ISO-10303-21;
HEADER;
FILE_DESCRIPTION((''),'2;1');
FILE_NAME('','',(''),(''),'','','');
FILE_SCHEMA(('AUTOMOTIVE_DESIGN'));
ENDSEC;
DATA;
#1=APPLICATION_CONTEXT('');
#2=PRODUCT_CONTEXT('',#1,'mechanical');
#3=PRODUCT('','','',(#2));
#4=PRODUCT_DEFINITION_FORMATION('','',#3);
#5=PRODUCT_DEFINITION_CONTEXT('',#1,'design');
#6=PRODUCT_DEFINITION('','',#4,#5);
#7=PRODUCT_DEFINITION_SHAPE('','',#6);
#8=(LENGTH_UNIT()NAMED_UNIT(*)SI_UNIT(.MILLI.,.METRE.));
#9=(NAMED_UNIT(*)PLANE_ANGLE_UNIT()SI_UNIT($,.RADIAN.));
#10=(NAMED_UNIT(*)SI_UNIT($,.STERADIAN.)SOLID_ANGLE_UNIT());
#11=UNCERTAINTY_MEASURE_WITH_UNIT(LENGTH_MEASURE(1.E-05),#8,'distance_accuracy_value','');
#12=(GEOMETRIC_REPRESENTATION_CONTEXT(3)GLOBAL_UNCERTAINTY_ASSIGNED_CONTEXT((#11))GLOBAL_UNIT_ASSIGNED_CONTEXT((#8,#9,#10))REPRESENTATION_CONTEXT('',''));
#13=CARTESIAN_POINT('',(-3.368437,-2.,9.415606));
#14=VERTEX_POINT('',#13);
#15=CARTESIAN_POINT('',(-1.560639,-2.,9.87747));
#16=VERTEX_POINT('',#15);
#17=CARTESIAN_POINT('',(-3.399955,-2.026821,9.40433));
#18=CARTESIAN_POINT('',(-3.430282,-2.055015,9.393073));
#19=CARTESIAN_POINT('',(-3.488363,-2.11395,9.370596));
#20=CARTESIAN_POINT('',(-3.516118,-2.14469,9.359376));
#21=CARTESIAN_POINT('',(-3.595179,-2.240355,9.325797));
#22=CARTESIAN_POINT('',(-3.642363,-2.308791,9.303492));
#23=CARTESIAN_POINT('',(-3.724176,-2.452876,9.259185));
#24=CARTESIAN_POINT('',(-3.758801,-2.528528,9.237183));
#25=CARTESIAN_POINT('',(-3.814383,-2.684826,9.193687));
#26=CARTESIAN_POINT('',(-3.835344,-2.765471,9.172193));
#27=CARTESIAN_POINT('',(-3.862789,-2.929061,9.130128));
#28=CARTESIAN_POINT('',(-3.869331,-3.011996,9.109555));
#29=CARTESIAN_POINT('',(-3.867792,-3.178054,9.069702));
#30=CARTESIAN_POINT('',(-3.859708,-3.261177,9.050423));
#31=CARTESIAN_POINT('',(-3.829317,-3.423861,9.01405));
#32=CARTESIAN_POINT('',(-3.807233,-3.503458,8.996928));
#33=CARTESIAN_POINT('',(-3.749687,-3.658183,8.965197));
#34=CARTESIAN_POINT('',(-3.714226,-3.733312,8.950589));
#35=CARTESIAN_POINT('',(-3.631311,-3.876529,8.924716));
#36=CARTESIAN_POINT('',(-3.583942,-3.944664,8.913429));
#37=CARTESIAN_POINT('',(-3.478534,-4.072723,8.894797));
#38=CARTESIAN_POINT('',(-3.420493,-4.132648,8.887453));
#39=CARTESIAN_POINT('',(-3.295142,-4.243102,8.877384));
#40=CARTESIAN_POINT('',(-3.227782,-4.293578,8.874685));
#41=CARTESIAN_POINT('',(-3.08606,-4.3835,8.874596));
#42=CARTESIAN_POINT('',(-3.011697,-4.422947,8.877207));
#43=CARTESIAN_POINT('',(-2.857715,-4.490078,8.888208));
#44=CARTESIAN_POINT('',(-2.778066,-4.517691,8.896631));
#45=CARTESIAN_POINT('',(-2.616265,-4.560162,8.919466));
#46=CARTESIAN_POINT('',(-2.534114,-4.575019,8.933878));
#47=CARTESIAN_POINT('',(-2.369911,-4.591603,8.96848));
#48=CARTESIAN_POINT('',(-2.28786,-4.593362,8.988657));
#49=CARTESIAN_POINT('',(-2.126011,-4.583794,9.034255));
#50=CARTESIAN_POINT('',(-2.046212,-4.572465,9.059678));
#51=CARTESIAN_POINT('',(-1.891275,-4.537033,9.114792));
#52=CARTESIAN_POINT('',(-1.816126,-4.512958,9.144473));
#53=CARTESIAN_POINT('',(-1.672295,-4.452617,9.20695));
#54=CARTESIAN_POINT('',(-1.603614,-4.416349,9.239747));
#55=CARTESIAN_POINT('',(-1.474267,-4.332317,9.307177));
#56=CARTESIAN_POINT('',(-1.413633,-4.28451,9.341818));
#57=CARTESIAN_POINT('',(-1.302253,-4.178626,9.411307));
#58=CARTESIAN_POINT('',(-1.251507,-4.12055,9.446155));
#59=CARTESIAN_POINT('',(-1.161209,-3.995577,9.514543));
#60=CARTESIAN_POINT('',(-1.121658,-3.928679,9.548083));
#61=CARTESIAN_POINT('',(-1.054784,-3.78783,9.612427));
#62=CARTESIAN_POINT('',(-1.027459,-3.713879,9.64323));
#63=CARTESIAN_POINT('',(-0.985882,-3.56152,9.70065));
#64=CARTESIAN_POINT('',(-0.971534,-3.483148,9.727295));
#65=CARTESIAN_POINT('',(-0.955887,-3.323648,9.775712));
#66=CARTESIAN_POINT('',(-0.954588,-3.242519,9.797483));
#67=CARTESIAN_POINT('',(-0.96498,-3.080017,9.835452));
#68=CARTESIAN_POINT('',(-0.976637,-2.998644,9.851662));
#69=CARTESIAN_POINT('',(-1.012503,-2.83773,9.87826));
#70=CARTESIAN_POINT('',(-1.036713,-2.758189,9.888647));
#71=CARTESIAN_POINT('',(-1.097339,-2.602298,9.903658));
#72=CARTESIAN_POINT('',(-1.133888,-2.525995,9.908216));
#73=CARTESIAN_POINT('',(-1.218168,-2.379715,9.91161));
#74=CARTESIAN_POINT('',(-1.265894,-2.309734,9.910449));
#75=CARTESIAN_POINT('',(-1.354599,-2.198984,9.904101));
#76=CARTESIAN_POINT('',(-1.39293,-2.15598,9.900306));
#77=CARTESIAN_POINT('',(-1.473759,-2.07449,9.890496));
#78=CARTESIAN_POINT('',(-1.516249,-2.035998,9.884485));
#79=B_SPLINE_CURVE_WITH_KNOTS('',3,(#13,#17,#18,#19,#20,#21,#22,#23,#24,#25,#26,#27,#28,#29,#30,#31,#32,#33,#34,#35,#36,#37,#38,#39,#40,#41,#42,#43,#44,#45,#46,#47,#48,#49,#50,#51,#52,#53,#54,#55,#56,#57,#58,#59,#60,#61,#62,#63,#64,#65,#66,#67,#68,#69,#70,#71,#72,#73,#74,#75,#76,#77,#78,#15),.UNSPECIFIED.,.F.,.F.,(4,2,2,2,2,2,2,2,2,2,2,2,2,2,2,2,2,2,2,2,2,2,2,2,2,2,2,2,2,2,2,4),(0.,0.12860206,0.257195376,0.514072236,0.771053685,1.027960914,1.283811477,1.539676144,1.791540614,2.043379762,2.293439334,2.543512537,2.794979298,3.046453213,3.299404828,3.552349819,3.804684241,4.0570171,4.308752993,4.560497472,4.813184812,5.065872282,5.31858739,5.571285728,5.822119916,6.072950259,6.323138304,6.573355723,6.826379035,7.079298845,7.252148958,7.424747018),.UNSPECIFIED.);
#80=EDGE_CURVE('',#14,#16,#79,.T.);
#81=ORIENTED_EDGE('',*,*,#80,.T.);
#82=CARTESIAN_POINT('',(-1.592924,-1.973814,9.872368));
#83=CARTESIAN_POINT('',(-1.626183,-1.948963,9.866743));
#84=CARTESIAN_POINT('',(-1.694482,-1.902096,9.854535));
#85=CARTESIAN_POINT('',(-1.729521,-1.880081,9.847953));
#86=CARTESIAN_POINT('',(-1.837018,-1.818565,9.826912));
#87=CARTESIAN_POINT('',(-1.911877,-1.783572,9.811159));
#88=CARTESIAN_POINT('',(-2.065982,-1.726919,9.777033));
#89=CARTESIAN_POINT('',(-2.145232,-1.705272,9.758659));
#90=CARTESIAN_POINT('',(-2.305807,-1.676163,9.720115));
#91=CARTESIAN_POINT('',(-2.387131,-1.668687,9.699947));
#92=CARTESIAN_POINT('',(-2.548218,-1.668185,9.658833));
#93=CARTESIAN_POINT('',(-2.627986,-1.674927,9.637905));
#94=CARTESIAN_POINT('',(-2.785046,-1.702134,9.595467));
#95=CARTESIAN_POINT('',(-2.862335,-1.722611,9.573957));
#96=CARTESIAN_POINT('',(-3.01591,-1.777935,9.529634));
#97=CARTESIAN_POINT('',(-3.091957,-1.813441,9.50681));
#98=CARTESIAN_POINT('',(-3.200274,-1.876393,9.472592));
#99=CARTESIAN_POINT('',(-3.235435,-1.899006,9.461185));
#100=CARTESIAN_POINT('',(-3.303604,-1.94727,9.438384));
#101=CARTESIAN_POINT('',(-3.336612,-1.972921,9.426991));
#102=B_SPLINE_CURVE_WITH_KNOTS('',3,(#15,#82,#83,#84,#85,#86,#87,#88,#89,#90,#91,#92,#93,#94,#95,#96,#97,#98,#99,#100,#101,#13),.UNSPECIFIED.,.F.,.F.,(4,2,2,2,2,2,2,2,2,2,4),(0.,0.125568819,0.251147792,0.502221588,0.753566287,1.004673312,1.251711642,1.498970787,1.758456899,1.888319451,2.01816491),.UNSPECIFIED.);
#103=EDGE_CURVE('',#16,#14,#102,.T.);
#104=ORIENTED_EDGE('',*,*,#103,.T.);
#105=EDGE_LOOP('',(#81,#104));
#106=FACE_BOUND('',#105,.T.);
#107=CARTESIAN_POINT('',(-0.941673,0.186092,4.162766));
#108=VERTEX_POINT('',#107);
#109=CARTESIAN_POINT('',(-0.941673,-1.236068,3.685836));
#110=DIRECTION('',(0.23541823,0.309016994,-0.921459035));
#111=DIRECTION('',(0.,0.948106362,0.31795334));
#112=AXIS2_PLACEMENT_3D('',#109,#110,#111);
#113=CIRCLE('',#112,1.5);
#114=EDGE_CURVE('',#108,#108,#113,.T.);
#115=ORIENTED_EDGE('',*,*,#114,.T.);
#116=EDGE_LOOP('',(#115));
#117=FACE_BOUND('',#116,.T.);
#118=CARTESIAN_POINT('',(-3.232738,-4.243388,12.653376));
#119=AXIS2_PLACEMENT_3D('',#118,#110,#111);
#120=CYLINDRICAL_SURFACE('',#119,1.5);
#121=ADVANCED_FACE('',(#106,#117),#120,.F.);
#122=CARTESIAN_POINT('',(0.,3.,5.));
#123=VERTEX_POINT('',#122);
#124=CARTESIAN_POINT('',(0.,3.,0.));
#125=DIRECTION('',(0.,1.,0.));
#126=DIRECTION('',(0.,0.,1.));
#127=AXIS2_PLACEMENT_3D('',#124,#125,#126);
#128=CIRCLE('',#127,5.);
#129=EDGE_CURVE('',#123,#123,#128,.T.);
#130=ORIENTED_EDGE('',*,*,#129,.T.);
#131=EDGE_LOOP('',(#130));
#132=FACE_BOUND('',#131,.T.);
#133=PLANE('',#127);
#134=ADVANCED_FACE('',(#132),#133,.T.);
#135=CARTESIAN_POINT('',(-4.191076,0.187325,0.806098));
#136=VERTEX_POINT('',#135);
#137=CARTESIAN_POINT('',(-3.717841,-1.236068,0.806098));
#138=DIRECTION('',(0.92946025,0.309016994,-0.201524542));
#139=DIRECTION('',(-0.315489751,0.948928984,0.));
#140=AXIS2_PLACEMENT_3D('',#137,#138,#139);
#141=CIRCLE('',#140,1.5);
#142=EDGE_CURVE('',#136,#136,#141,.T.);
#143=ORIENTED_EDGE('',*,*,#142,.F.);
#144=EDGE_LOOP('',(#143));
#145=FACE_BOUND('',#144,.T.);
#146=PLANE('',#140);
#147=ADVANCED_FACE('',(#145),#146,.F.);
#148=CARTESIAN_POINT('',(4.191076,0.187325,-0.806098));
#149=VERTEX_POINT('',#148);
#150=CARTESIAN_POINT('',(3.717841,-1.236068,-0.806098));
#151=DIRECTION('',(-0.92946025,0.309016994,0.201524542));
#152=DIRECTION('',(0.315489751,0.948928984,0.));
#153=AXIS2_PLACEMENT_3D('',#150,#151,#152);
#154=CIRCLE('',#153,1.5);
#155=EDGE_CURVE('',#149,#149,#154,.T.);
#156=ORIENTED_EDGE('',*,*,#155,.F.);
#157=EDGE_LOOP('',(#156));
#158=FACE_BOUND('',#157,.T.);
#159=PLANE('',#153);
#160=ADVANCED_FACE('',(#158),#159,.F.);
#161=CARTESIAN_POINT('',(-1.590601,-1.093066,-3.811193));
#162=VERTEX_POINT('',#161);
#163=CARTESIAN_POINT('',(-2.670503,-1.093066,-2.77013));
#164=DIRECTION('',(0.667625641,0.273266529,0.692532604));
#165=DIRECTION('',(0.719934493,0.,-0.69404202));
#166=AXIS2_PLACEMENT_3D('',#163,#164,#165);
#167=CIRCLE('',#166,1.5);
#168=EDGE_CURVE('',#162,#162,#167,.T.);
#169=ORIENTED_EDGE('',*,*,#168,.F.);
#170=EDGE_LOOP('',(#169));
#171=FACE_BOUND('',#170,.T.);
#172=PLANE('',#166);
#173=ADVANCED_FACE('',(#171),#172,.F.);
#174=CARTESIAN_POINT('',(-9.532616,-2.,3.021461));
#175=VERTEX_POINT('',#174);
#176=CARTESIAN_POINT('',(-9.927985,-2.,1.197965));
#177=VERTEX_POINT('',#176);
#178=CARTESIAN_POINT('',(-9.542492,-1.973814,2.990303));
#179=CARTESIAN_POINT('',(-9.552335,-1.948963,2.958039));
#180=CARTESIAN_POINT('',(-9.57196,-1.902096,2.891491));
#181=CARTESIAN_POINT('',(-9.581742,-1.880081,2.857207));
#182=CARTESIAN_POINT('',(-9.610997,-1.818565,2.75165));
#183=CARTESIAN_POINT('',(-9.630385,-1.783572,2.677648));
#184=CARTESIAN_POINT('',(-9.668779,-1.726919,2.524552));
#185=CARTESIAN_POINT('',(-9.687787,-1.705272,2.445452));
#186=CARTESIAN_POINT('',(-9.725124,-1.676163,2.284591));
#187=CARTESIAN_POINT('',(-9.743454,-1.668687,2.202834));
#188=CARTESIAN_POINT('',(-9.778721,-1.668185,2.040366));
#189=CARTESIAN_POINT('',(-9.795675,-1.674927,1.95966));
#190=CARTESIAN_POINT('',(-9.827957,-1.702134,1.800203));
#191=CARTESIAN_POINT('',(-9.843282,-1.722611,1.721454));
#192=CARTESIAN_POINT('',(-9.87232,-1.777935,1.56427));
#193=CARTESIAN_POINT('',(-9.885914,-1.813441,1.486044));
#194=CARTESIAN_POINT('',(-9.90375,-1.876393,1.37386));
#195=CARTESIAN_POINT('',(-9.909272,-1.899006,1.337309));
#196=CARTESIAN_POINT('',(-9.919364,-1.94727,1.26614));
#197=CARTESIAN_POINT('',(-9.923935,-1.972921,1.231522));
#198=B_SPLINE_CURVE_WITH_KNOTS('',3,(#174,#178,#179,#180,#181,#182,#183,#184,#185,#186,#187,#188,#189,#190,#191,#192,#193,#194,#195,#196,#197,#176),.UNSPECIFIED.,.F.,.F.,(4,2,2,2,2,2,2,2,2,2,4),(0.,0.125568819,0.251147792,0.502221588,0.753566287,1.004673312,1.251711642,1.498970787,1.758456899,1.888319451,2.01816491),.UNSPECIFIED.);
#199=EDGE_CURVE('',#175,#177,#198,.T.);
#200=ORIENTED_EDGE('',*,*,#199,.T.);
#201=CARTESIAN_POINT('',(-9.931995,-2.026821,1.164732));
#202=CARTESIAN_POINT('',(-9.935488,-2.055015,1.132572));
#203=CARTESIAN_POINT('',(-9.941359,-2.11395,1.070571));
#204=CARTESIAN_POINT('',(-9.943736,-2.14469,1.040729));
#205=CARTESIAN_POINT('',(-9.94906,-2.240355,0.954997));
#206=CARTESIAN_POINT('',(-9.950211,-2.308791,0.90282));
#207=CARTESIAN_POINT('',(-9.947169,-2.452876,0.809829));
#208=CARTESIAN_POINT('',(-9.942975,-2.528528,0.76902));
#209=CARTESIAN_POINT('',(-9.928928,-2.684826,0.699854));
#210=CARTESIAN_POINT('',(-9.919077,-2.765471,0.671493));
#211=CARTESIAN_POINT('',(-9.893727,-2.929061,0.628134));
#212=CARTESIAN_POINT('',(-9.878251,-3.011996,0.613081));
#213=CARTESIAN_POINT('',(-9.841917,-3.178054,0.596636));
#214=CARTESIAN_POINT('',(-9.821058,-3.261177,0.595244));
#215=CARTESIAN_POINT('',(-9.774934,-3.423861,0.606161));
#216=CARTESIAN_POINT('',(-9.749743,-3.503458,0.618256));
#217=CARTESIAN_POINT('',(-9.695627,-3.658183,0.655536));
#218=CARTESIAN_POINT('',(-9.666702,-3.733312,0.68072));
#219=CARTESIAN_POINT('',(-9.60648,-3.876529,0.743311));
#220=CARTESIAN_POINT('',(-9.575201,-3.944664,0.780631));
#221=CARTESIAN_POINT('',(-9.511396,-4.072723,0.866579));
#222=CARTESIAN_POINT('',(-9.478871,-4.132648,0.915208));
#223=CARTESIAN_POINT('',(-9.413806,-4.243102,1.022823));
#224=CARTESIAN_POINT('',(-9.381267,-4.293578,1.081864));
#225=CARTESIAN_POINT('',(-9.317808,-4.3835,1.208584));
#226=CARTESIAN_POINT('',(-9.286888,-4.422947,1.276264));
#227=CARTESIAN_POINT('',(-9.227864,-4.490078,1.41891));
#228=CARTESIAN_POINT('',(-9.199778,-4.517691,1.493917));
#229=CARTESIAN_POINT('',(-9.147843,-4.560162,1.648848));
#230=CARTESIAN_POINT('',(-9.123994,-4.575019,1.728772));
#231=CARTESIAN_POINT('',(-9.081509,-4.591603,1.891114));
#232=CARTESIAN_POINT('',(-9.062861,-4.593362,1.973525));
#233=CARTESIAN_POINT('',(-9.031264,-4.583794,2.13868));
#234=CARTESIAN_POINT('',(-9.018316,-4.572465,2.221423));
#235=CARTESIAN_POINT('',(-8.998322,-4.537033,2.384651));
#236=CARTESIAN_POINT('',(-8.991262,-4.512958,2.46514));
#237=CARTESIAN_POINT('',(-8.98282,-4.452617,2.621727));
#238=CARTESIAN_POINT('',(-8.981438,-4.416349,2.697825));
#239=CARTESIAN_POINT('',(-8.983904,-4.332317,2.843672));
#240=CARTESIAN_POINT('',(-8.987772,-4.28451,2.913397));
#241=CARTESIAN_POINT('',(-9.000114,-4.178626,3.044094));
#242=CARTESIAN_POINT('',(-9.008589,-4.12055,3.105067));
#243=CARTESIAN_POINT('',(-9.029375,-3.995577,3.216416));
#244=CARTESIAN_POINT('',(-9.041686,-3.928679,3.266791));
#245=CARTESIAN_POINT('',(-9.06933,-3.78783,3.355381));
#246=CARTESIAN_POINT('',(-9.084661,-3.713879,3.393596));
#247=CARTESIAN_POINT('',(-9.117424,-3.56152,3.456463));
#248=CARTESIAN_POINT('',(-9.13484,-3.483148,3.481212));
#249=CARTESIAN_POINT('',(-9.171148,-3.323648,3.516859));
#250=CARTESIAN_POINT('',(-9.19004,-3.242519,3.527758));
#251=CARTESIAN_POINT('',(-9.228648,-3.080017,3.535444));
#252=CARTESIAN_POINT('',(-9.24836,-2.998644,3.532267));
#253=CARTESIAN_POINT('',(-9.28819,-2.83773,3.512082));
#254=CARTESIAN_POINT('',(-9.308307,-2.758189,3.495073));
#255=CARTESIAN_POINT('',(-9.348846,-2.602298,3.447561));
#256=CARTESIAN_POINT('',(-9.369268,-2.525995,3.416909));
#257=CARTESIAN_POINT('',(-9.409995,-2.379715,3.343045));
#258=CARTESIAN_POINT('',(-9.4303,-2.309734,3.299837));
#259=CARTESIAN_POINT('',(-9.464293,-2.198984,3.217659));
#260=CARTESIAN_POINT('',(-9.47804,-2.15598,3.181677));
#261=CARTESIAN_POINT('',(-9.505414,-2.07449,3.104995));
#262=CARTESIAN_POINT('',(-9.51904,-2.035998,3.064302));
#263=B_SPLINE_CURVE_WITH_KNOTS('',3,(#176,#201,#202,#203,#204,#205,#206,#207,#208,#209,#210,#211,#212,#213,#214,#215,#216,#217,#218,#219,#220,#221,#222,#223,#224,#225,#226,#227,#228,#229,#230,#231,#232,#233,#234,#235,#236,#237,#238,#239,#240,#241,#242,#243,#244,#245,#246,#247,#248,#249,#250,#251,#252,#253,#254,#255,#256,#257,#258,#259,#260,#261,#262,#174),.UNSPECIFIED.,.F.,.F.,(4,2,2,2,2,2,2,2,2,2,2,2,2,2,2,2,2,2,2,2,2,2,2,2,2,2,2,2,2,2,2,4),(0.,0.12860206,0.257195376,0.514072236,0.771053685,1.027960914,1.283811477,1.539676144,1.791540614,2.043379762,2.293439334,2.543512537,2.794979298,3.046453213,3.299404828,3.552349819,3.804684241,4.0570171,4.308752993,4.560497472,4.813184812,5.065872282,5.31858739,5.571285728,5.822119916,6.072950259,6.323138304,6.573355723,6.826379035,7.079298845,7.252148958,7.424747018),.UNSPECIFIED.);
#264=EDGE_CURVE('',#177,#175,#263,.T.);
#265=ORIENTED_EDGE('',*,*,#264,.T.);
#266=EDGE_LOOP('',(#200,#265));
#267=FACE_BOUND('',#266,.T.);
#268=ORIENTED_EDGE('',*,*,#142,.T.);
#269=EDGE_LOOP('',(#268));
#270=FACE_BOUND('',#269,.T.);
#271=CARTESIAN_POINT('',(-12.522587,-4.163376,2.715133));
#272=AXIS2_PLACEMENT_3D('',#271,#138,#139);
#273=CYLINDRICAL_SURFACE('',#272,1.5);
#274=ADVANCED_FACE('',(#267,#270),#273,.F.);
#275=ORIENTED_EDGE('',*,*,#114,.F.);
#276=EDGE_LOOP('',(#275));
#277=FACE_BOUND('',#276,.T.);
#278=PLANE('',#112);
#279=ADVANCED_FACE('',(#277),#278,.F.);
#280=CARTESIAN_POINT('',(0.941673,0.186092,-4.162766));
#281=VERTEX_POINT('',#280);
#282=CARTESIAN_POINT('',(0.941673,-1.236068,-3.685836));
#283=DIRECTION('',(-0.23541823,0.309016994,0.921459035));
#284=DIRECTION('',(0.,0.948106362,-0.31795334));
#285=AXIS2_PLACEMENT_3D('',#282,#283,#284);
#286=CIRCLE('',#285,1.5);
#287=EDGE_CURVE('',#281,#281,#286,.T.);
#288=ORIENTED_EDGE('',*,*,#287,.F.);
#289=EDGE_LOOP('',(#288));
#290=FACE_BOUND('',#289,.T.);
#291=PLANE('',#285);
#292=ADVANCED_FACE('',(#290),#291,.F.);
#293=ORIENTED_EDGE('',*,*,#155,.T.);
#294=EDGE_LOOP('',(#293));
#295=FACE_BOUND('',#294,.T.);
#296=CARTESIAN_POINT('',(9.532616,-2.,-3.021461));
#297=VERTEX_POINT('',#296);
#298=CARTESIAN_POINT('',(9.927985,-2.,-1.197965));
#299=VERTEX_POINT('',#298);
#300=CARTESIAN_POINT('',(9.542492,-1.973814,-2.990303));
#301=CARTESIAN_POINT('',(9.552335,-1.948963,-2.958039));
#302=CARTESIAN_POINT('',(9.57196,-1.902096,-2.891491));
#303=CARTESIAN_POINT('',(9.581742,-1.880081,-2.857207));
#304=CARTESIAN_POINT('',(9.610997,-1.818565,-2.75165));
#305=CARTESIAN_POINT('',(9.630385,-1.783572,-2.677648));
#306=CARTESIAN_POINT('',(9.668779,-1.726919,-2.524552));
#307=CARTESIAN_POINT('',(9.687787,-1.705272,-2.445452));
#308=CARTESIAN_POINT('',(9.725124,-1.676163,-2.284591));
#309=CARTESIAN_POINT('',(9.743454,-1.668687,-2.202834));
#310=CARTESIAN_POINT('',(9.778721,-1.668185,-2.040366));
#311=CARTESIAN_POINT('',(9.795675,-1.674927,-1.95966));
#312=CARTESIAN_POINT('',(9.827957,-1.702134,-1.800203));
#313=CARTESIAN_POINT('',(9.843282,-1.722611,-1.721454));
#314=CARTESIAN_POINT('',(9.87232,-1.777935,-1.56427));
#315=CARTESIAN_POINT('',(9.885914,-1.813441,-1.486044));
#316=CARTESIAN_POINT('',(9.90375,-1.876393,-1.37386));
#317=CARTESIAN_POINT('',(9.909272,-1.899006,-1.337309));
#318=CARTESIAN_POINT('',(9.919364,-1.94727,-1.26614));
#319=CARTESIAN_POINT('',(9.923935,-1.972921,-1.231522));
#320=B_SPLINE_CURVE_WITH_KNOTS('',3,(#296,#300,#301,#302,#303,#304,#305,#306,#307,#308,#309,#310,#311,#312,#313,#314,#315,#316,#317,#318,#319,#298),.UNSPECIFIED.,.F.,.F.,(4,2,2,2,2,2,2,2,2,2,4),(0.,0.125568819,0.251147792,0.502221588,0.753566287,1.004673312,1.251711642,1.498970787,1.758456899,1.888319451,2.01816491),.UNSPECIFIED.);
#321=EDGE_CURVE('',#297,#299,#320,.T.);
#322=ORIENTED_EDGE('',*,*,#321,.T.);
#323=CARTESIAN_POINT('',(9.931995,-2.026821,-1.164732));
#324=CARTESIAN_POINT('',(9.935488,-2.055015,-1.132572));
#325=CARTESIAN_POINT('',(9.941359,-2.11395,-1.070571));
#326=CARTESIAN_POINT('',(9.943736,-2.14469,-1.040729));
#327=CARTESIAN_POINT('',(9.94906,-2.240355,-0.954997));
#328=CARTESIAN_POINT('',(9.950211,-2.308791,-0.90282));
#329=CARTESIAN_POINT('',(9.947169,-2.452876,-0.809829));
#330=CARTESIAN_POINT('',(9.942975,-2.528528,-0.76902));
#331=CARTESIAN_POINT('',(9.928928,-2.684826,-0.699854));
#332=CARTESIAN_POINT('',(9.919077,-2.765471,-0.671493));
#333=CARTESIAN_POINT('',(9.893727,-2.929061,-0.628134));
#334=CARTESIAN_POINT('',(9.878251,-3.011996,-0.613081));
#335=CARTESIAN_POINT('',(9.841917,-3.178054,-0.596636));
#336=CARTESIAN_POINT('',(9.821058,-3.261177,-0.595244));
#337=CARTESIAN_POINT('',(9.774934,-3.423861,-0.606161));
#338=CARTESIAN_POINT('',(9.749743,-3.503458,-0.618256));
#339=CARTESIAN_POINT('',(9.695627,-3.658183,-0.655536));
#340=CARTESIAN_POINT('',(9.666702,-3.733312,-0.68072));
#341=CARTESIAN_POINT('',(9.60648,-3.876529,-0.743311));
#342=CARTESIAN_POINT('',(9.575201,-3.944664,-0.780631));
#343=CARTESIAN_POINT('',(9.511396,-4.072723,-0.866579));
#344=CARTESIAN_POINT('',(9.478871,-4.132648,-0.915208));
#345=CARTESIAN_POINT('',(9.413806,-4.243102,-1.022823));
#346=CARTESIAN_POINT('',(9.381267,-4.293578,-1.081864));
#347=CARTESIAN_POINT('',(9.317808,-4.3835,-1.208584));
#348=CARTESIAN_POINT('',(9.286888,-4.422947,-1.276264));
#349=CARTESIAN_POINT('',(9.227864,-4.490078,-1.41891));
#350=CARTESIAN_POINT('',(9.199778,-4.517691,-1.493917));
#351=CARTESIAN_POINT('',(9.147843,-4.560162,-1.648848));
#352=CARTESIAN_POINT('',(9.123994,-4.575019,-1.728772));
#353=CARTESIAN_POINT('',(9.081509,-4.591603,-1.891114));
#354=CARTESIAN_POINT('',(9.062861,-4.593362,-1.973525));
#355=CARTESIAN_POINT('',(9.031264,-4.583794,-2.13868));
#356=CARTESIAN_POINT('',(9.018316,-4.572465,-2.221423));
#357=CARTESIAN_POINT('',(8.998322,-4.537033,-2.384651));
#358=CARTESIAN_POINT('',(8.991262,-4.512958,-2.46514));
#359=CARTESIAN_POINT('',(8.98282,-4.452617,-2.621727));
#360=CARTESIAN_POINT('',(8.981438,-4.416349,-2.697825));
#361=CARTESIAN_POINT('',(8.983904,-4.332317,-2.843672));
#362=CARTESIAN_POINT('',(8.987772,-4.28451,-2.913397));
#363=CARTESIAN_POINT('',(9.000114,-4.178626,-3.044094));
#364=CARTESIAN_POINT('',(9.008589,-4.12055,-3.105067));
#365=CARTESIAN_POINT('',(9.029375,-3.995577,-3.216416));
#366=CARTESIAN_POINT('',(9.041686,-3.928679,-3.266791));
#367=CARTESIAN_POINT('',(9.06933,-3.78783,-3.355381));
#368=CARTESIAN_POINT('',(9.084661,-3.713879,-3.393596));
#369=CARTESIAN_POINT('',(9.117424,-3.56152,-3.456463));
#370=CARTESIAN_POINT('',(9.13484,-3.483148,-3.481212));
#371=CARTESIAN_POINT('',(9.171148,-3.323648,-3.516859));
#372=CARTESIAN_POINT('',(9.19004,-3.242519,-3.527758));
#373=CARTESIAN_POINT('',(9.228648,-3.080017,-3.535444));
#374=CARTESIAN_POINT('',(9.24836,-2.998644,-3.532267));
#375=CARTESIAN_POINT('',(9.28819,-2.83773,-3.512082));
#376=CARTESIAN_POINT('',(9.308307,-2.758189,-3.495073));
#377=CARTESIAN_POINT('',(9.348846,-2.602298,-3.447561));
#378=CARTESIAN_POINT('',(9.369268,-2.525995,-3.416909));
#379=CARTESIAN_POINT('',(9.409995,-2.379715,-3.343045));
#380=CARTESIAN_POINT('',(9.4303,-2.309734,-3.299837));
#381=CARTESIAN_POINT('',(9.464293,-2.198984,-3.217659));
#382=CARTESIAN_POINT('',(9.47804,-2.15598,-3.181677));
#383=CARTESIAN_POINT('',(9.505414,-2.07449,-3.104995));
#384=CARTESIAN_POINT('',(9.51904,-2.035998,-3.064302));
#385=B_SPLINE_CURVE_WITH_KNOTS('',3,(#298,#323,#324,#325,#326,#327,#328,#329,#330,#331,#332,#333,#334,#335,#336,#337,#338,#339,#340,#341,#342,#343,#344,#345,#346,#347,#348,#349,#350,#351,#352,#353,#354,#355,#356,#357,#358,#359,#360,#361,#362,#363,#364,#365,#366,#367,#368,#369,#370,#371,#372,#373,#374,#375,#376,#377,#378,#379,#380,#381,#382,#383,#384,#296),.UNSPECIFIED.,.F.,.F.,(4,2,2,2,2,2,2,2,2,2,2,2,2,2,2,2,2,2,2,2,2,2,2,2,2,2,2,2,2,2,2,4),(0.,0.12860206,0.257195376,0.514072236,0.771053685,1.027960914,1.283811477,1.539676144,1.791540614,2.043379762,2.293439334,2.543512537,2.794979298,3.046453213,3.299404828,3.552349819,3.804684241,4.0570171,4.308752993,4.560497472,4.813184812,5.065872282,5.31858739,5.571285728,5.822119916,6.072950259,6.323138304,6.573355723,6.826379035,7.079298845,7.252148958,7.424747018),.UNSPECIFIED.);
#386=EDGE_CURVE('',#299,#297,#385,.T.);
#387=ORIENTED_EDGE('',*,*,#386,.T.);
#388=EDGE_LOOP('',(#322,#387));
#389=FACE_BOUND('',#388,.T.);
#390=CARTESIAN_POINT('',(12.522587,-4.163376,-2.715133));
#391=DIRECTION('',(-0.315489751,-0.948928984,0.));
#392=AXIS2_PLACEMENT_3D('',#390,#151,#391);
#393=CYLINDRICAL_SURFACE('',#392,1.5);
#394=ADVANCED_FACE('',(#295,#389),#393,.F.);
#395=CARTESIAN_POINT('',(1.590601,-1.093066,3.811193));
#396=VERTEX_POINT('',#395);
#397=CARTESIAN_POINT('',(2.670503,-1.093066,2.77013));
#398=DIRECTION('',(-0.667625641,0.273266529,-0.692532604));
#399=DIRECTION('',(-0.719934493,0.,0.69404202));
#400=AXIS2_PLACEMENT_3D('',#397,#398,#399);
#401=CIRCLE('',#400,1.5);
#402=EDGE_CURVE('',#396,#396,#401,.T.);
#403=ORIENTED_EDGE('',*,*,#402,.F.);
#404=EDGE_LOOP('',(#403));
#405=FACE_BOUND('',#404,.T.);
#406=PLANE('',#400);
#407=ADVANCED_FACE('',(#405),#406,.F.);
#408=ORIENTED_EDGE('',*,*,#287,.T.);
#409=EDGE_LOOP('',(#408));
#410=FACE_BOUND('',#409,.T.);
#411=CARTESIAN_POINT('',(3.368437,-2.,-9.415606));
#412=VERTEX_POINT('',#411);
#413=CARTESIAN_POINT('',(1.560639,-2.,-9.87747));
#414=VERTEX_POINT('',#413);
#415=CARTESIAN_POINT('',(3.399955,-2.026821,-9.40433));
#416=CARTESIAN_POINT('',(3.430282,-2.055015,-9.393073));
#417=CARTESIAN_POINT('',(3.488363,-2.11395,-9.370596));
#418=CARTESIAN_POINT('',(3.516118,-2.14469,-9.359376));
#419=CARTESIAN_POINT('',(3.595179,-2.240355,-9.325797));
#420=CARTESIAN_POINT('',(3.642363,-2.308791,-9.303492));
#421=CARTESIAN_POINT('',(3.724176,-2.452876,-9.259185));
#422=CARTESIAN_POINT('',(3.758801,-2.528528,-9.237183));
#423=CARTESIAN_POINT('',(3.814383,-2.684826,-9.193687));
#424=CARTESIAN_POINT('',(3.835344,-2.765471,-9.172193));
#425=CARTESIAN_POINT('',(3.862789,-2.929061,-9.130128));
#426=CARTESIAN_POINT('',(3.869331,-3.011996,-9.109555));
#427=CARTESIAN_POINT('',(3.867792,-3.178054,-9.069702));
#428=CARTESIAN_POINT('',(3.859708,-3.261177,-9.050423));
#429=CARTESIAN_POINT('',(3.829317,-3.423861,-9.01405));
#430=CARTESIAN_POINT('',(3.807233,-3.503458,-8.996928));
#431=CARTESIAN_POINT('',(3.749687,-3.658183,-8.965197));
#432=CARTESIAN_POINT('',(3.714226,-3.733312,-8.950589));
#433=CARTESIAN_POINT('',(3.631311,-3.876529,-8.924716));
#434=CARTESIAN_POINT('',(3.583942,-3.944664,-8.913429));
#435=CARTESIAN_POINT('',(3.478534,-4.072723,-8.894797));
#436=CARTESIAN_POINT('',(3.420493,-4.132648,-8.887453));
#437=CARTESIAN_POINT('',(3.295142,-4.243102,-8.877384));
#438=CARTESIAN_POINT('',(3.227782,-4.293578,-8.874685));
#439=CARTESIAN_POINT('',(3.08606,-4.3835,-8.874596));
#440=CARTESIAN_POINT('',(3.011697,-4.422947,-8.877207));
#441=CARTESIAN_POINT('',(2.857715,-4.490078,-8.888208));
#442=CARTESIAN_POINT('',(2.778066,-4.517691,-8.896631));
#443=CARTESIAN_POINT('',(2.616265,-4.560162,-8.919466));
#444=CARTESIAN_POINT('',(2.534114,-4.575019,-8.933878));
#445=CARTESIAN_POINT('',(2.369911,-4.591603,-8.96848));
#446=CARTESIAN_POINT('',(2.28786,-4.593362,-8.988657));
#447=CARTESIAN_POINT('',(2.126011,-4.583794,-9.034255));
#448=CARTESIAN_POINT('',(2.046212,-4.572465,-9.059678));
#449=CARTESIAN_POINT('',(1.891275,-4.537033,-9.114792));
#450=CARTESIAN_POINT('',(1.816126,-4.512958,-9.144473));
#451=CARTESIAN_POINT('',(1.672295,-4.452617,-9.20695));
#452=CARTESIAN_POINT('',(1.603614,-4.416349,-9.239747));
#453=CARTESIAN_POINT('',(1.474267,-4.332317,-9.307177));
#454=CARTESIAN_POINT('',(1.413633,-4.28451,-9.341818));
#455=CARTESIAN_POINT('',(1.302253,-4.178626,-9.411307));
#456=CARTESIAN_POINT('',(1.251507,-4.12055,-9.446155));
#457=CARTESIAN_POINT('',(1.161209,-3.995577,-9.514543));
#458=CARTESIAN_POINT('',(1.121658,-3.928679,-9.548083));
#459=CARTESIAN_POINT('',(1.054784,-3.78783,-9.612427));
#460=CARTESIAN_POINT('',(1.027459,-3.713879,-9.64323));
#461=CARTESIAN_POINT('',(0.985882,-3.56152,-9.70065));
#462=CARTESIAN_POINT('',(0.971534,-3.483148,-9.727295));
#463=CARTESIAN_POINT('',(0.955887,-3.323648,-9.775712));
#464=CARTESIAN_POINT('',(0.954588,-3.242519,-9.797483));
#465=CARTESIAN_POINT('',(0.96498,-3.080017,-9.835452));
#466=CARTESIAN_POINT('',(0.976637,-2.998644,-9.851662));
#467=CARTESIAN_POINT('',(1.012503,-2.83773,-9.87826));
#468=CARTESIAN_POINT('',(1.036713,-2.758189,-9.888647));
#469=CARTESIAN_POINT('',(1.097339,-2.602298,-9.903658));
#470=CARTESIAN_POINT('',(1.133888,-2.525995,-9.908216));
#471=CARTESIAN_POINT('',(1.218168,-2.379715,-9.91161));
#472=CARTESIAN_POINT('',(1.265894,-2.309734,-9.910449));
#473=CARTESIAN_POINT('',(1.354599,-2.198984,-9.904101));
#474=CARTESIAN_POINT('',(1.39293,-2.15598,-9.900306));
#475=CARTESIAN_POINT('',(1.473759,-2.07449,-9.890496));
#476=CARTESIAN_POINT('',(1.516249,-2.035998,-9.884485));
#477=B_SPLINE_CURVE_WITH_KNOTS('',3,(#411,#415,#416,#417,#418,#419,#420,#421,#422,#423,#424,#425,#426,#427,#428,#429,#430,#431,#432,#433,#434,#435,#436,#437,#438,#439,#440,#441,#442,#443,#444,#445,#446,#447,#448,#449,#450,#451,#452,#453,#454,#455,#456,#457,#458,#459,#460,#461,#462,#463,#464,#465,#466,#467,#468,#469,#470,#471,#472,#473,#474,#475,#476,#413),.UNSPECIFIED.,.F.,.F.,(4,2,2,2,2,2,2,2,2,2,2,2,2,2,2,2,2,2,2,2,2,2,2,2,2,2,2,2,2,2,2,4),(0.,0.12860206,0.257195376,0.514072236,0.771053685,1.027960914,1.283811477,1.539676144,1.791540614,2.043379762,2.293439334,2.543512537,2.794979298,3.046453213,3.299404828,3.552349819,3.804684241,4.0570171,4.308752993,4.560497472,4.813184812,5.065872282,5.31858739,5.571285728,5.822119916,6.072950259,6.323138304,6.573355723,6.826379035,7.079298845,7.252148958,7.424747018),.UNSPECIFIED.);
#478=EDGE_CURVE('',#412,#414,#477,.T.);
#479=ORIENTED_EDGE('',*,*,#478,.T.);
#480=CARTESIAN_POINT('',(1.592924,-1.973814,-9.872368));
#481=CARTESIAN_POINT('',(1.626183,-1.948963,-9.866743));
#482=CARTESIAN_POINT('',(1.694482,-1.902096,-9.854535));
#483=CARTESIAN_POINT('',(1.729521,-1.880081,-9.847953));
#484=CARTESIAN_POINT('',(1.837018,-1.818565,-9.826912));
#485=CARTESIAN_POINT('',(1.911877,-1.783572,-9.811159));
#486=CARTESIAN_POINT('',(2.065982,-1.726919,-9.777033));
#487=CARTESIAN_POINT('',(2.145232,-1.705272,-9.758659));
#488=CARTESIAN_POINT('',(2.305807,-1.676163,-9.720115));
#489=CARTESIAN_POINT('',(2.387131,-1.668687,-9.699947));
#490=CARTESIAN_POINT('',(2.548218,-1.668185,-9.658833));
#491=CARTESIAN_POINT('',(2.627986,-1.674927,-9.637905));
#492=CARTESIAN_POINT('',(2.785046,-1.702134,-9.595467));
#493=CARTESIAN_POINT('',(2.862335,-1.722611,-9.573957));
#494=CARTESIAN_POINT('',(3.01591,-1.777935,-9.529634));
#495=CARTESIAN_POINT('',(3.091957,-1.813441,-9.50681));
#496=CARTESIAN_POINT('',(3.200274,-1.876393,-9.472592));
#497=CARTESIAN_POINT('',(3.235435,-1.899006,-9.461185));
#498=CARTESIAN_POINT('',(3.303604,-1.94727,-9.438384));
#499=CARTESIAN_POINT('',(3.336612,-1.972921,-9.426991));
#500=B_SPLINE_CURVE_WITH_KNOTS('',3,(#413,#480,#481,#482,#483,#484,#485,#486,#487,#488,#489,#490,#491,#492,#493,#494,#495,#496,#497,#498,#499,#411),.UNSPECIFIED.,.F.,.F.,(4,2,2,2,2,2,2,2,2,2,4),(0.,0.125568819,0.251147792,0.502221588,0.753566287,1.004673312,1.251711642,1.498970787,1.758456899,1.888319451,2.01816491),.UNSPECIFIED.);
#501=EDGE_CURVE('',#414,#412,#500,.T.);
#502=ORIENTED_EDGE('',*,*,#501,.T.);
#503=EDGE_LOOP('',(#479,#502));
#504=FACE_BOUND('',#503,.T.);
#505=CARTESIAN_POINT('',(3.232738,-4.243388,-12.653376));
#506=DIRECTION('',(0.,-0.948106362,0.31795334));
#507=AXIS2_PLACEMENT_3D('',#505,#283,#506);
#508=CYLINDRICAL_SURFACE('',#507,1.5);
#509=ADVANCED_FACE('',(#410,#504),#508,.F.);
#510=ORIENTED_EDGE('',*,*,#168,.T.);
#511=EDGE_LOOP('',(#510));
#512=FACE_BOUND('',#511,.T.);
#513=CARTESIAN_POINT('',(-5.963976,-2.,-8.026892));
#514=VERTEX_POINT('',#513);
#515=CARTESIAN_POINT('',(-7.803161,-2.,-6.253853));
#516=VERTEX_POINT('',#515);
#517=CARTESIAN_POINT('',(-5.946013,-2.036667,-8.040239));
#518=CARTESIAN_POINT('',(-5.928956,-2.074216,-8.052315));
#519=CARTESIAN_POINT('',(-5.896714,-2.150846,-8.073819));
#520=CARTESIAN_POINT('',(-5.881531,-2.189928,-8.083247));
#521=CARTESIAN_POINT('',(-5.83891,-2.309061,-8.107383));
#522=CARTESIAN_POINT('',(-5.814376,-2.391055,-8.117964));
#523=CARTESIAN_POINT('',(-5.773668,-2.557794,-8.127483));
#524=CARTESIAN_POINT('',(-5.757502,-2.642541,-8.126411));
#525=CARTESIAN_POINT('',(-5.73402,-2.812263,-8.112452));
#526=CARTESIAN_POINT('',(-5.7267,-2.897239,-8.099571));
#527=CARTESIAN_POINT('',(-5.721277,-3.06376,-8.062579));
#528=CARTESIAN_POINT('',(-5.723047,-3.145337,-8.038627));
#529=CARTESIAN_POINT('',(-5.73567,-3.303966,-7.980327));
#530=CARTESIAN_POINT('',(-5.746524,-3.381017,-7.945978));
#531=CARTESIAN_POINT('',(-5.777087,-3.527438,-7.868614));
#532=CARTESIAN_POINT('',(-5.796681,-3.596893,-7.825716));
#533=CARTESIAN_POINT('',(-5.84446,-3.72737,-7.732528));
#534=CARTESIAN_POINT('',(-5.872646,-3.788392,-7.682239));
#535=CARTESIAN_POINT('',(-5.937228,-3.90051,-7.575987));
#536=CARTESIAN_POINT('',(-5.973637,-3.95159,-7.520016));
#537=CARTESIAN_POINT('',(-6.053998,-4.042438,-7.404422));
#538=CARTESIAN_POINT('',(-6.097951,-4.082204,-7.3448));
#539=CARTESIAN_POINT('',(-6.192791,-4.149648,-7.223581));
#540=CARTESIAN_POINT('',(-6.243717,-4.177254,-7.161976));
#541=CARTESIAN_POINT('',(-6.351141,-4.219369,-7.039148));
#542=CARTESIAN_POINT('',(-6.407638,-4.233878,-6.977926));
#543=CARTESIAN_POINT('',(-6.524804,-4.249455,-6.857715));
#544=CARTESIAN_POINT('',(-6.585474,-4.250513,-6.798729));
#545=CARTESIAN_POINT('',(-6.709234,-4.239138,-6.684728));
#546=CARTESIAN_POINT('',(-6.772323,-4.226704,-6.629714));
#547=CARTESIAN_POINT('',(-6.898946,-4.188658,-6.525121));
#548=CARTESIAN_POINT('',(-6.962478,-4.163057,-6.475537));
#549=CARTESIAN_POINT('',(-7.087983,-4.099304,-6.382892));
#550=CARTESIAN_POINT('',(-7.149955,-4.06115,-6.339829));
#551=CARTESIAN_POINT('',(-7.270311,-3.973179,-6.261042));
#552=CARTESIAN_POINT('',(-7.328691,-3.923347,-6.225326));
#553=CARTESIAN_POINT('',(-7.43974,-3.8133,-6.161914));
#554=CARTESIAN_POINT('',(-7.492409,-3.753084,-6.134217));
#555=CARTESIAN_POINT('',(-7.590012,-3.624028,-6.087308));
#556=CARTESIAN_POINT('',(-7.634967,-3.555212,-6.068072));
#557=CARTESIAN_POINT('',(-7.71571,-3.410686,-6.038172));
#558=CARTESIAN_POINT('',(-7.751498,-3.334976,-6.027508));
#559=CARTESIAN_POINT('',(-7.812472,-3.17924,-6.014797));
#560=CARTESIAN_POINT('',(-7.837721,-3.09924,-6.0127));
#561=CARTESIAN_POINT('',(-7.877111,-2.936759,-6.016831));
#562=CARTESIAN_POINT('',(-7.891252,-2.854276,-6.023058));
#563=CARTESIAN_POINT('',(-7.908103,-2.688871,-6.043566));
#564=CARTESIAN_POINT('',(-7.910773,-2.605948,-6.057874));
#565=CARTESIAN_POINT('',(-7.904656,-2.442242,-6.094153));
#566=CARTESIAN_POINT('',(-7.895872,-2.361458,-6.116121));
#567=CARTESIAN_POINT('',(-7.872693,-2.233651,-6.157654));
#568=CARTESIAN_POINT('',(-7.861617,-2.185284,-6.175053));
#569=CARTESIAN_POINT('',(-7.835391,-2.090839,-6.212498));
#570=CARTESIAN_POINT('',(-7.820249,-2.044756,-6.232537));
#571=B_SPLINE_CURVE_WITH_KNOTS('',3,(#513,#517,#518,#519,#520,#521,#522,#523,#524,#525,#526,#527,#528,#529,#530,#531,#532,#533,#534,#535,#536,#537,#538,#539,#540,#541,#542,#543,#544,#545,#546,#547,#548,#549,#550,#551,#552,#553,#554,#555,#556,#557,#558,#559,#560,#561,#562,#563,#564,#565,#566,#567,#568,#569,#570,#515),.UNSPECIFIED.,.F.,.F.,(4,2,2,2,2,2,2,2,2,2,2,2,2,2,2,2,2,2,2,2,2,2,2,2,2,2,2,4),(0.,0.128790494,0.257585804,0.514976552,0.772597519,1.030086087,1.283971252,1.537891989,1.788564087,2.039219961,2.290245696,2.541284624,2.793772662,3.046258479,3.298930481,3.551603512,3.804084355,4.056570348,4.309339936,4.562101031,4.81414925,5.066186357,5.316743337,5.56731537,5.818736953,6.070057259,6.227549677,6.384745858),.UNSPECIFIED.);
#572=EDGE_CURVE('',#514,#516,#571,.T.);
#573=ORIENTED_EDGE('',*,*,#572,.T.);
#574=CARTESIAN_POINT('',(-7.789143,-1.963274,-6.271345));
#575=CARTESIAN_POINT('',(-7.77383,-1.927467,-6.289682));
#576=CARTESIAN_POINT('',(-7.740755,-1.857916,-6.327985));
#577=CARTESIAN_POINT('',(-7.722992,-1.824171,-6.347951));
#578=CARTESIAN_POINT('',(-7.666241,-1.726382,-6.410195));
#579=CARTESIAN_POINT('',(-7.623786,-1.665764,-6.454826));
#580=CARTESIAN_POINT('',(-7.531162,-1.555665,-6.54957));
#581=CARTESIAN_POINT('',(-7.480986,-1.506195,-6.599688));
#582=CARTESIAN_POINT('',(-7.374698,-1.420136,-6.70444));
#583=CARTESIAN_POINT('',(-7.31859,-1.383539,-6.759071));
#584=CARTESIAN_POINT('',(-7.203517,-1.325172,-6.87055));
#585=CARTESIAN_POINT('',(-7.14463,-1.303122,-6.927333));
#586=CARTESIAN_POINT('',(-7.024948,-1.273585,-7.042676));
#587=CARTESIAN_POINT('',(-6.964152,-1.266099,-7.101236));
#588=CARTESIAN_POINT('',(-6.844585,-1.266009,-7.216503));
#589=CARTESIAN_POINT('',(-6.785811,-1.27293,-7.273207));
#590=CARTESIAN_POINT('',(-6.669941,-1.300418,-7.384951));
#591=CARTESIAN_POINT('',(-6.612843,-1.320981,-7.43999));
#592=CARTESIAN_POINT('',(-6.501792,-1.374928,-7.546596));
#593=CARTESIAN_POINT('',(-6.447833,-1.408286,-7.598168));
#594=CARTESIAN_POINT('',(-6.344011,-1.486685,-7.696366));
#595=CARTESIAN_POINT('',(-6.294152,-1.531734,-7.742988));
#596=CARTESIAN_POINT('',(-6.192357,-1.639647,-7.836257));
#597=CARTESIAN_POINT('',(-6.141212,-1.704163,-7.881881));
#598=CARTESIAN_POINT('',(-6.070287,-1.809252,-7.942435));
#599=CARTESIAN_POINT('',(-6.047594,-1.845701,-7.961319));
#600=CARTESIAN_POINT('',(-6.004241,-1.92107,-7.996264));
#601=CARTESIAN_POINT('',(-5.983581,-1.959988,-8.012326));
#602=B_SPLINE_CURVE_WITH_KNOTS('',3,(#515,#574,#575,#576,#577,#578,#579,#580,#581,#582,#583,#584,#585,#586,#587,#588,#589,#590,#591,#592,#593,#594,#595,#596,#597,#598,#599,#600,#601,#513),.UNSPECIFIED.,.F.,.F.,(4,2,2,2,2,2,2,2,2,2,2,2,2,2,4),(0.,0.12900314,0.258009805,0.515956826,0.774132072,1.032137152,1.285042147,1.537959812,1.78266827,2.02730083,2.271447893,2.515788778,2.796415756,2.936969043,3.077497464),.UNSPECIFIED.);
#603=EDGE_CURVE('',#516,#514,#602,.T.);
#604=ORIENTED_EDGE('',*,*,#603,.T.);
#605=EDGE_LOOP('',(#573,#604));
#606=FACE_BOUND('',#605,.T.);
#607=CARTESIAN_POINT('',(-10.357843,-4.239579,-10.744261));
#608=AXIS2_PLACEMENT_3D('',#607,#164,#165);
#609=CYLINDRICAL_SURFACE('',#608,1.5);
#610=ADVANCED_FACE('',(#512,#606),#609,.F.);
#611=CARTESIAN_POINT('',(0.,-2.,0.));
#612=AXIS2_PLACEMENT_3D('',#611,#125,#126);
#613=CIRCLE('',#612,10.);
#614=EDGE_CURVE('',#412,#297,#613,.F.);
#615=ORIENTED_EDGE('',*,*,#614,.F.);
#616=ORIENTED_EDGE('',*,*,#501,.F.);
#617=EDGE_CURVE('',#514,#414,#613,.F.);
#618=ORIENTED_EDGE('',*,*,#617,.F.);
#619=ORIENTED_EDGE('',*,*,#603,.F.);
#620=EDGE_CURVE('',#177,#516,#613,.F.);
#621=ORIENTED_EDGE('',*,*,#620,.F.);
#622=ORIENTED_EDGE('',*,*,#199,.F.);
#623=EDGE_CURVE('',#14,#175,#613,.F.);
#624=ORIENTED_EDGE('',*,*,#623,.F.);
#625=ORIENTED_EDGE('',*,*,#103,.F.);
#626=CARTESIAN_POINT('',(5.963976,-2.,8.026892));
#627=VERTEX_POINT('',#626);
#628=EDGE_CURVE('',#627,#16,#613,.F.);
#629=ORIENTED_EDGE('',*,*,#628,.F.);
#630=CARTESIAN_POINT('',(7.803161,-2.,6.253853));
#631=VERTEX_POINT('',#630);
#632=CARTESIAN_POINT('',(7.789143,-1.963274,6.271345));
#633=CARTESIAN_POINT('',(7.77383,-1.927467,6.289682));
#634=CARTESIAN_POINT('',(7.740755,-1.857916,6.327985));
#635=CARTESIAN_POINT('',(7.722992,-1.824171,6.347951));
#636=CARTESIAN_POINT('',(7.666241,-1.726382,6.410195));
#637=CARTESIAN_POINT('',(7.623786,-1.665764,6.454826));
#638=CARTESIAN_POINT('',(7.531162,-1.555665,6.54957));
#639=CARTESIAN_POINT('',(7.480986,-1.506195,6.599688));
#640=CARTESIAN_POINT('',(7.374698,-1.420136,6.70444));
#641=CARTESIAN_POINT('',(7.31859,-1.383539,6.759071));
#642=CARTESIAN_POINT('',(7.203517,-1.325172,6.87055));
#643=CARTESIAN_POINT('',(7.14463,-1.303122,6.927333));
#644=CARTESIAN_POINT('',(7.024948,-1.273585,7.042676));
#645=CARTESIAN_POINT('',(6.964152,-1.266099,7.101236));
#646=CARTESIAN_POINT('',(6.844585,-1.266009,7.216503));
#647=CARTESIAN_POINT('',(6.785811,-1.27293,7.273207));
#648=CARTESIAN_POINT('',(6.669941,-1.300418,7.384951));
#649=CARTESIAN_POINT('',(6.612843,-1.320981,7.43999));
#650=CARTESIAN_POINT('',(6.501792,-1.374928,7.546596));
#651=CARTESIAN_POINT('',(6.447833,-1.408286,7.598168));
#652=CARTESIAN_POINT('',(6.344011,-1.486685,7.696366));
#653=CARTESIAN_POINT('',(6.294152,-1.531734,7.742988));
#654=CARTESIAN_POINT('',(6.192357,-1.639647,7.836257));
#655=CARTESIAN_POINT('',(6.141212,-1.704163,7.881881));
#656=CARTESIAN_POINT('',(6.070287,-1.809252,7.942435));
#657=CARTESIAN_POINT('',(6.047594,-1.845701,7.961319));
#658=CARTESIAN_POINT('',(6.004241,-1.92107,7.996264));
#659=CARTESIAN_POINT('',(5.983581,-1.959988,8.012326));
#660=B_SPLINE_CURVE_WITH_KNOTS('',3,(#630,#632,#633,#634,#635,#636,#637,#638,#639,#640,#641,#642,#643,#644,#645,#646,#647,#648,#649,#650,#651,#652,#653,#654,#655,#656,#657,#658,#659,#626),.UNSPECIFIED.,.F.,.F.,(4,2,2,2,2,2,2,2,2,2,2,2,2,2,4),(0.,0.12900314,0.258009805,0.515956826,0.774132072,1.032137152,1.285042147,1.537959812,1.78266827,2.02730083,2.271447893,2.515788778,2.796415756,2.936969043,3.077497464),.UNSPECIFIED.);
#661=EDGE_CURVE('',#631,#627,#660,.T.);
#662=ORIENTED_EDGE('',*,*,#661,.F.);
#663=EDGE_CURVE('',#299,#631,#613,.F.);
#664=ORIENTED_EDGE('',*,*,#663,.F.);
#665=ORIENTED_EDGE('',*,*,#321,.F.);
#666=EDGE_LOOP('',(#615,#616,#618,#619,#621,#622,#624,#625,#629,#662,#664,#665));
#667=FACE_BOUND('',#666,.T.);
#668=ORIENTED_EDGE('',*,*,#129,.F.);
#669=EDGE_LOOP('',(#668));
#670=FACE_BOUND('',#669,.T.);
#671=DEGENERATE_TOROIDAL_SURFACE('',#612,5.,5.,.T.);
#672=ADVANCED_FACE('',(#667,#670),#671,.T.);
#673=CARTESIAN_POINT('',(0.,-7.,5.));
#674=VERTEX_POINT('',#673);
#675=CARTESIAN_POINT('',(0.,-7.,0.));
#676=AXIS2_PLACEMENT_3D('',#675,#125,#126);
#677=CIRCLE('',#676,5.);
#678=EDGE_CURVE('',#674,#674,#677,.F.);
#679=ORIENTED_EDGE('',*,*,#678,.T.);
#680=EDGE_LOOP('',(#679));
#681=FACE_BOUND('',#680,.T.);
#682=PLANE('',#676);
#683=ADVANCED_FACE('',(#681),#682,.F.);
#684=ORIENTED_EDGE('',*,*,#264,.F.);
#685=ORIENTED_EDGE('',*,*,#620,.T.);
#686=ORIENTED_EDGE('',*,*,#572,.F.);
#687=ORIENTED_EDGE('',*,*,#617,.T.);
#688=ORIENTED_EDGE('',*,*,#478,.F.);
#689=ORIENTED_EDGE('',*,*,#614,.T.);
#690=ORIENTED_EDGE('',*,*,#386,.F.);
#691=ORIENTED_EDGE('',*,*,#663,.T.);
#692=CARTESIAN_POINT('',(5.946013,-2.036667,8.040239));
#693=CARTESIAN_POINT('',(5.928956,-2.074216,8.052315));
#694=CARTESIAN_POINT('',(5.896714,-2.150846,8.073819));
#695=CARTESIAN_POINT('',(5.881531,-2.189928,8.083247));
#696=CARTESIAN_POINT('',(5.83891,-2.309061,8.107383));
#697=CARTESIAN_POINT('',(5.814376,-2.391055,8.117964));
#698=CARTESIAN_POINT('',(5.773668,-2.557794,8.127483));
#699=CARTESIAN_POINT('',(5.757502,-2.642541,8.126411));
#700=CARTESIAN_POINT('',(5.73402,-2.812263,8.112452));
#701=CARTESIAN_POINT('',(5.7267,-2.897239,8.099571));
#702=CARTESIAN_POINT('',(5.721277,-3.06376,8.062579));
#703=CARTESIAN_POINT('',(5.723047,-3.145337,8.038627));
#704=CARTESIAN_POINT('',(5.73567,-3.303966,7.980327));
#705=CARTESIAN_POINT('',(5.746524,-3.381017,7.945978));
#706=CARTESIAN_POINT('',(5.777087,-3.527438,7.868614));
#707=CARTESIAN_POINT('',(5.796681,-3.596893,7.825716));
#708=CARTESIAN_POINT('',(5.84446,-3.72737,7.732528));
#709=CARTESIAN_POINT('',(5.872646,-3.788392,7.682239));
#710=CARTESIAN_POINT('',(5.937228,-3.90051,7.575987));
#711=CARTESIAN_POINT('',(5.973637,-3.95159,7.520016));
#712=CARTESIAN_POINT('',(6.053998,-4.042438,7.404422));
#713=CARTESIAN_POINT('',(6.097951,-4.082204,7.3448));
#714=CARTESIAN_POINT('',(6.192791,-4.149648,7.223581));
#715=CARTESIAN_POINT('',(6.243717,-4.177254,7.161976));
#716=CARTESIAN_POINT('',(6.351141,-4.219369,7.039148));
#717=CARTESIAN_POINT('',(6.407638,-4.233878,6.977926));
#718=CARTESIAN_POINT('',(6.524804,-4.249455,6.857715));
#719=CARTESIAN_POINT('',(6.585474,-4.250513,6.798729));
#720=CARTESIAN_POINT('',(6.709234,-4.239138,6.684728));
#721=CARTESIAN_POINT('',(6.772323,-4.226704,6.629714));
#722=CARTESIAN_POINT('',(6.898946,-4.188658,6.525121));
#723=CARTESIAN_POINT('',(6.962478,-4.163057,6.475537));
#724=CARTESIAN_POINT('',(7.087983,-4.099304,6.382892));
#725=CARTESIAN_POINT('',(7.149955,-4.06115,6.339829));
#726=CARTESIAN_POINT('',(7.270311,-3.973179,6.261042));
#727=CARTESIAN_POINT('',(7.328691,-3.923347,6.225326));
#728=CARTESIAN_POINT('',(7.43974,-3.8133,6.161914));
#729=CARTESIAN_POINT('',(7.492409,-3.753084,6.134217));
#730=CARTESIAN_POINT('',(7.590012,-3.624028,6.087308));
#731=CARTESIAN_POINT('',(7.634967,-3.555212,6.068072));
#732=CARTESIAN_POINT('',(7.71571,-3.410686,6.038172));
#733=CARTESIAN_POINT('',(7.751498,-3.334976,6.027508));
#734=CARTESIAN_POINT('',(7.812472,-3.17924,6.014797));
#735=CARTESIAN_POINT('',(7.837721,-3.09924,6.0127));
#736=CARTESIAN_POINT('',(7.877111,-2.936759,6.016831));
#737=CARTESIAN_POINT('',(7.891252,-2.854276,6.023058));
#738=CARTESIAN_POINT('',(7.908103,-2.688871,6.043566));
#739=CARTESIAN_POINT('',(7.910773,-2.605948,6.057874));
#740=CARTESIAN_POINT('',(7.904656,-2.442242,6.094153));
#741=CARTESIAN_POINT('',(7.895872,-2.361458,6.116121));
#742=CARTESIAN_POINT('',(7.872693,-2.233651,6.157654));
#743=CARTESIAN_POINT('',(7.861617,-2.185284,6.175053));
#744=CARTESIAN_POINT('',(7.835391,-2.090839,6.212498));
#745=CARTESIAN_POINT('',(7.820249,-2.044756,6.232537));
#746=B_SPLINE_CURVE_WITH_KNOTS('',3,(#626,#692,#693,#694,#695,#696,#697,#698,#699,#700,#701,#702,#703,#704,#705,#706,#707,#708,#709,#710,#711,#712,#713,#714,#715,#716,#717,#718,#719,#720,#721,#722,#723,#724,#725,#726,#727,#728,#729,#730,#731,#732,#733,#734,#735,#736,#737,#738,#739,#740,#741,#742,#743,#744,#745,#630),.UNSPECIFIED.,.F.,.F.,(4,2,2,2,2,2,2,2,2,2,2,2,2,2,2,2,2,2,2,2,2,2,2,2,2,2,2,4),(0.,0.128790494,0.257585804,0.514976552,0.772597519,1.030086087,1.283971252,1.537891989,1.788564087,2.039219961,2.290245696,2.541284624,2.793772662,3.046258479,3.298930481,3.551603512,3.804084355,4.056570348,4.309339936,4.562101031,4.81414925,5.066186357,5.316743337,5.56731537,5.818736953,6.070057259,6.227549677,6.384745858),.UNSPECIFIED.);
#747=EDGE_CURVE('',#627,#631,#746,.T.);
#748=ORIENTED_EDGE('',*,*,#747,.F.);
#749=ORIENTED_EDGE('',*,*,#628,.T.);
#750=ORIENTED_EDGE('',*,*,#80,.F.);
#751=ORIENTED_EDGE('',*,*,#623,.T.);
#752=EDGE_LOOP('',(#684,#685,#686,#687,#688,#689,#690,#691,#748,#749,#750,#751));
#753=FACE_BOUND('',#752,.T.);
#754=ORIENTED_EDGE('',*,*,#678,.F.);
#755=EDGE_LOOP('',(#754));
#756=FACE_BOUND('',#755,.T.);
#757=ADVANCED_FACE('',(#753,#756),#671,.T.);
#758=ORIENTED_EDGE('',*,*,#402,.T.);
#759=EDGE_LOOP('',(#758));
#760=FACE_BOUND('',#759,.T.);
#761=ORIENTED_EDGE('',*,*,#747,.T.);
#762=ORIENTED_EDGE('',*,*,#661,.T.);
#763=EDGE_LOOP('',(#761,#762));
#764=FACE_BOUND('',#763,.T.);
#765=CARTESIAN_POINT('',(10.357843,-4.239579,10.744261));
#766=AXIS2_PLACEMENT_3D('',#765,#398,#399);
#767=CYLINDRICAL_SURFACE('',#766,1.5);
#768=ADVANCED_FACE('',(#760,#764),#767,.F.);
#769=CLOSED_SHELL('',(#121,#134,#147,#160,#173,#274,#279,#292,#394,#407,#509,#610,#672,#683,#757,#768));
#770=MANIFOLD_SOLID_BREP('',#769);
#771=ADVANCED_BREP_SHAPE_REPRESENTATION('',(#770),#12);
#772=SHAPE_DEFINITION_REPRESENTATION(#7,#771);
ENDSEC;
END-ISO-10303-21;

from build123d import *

# Parameters (mm, degrees)
BASE_DEPTH        = 3
BASE_DEPTH_BACK   = 7
SKETCH1_R         = 10
SKETCH2_R         = 1.5
HOLE1_DEPTH       = 19.934353276
HOLE1MIRROR_COUNT = 2
SKETCH3_R         = 1.5
HOLE2_DEPTH       = 19.445737601
HOLE2MIRROR_COUNT = 2
SKETCH4_R         = 1.5
HOLE3_DEPTH       = 19.389503466
HOLE3MIRROR_COUNT = 2
FILLET1_R         = 5


with BuildPart() as part:
    # Sketch1 → base (new, two sides: drawn at the far end of the back side and taken through both)
    with BuildSketch(Plane(origin=(0, 0, 0), x_dir=(1, 0, 0), z_dir=(0, 1, 0)).offset(-BASE_DEPTH_BACK)):
        with Locations(Location((0, 0, 0), (0, 0, 270))):
            Circle(SKETCH1_R)
    extrude(amount=BASE_DEPTH + BASE_DEPTH_BACK)

    # Sketch2 → hole1 (cut, through all)
    with BuildSketch(Plane(origin=(2.670502563, -1.093066116, 2.770130417), x_dir=(-0.6558691872850446, 0.22429081675253856, 0.7207837669443827), z_dir=(-0.6676256406563905, 0.27326652891267483, -0.692532604369038))):
        with Locations(Location((0, 0, 0), (0, 0, 346.516491398))):
            Circle(SKETCH2_R)
    hole1 = extrude(amount=-HOLE1_DEPTH, mode=Mode.SUBTRACT)

    # hole1mirror: hole1 ×2 about axis
    hole1mirror_axis = Axis((0, 5.5, 0), (0, -1, 0))
    for i in range(1, HOLE1MIRROR_COUNT):
        add(hole1.rotate(hole1mirror_axis, i * 360 / HOLE1MIRROR_COUNT), mode=Mode.SUBTRACT)

    # Sketch3 → hole2 (cut, through all)
    with BuildSketch(Plane(origin=(-0.941672921, -1.236067977, 3.685836142), x_dir=(-0.9718935871364875, 0.07382318789513377, -0.22354639834264944), z_dir=(0.23541823021467095, 0.3090169943749464, -0.921459035481267))):
        with Locations(Location((0, 0, 0), (0, 0, 90.062171088))):
            Circle(SKETCH3_R)
    hole2 = extrude(amount=-HOLE2_DEPTH, mode=Mode.SUBTRACT)

    # hole2mirror: hole2 ×2 about axis
    hole2mirror_axis = Axis((0, 5.5, 0), (0, -1, 0))
    for i in range(1, HOLE2MIRROR_COUNT):
        add(hole2.rotate(hole2mirror_axis, i * 360 / HOLE2MIRROR_COUNT), mode=Mode.SUBTRACT)

    # Sketch4 → hole3 (cut, through all)
    with BuildSketch(Plane(origin=(-3.717841, -1.236067977, 0.806098168), x_dir=(-0.19123247894507908, -0.06357892752956036, -0.979483465389136), z_dir=(0.9294602499075393, 0.30901699437494623, -0.20152454200243008))):
        with Locations(Location((0, 0, 0), (0, 0, 90))):
            Circle(SKETCH4_R)
    hole3 = extrude(amount=-HOLE3_DEPTH, mode=Mode.SUBTRACT)

    # hole3mirror: hole3 ×2 about axis
    hole3mirror_axis = Axis((0, 5.5, 0), (0, -1, 0))
    for i in range(1, HOLE3MIRROR_COUNT):
        add(hole3.rotate(hole3mirror_axis, i * 360 / HOLE3MIRROR_COUNT), mode=Mode.SUBTRACT)

    # Fillet1
    # the kernel refuses this fillet: 5 mm, written as the material it takes off along each edge
    with BuildSketch(Plane(origin=(0, -7, 0), x_dir=(0, 0, 1), z_dir=(-1, 0, 0))) as fillet1_piece_1:
        with BuildLine():
            CenterArc((10 - FILLET1_R, FILLET1_R), FILLET1_R, 270, 90)
            Line((10 - FILLET1_R, 0), (10, 0))
            Line((10, 0), (10, FILLET1_R))
        make_face()
    revolve(axis=Axis((0, -7, 0), (0, 1, 0)), mode=Mode.SUBTRACT)
    with BuildSketch(Plane(origin=(0, 3, 0), x_dir=(0, 0, 1), z_dir=(-1, 0, 0))) as fillet1_piece_2:
        with BuildLine():
            CenterArc((10 - FILLET1_R, -FILLET1_R), FILLET1_R, 0, 90)
            Line((10 - FILLET1_R, 0), (10, 0))
            Line((10, 0), (10, -FILLET1_R))
        make_face()
    revolve(axis=Axis((0, 3, 0), (0, 1, 0)), mode=Mode.SUBTRACT)


solid = part.part
